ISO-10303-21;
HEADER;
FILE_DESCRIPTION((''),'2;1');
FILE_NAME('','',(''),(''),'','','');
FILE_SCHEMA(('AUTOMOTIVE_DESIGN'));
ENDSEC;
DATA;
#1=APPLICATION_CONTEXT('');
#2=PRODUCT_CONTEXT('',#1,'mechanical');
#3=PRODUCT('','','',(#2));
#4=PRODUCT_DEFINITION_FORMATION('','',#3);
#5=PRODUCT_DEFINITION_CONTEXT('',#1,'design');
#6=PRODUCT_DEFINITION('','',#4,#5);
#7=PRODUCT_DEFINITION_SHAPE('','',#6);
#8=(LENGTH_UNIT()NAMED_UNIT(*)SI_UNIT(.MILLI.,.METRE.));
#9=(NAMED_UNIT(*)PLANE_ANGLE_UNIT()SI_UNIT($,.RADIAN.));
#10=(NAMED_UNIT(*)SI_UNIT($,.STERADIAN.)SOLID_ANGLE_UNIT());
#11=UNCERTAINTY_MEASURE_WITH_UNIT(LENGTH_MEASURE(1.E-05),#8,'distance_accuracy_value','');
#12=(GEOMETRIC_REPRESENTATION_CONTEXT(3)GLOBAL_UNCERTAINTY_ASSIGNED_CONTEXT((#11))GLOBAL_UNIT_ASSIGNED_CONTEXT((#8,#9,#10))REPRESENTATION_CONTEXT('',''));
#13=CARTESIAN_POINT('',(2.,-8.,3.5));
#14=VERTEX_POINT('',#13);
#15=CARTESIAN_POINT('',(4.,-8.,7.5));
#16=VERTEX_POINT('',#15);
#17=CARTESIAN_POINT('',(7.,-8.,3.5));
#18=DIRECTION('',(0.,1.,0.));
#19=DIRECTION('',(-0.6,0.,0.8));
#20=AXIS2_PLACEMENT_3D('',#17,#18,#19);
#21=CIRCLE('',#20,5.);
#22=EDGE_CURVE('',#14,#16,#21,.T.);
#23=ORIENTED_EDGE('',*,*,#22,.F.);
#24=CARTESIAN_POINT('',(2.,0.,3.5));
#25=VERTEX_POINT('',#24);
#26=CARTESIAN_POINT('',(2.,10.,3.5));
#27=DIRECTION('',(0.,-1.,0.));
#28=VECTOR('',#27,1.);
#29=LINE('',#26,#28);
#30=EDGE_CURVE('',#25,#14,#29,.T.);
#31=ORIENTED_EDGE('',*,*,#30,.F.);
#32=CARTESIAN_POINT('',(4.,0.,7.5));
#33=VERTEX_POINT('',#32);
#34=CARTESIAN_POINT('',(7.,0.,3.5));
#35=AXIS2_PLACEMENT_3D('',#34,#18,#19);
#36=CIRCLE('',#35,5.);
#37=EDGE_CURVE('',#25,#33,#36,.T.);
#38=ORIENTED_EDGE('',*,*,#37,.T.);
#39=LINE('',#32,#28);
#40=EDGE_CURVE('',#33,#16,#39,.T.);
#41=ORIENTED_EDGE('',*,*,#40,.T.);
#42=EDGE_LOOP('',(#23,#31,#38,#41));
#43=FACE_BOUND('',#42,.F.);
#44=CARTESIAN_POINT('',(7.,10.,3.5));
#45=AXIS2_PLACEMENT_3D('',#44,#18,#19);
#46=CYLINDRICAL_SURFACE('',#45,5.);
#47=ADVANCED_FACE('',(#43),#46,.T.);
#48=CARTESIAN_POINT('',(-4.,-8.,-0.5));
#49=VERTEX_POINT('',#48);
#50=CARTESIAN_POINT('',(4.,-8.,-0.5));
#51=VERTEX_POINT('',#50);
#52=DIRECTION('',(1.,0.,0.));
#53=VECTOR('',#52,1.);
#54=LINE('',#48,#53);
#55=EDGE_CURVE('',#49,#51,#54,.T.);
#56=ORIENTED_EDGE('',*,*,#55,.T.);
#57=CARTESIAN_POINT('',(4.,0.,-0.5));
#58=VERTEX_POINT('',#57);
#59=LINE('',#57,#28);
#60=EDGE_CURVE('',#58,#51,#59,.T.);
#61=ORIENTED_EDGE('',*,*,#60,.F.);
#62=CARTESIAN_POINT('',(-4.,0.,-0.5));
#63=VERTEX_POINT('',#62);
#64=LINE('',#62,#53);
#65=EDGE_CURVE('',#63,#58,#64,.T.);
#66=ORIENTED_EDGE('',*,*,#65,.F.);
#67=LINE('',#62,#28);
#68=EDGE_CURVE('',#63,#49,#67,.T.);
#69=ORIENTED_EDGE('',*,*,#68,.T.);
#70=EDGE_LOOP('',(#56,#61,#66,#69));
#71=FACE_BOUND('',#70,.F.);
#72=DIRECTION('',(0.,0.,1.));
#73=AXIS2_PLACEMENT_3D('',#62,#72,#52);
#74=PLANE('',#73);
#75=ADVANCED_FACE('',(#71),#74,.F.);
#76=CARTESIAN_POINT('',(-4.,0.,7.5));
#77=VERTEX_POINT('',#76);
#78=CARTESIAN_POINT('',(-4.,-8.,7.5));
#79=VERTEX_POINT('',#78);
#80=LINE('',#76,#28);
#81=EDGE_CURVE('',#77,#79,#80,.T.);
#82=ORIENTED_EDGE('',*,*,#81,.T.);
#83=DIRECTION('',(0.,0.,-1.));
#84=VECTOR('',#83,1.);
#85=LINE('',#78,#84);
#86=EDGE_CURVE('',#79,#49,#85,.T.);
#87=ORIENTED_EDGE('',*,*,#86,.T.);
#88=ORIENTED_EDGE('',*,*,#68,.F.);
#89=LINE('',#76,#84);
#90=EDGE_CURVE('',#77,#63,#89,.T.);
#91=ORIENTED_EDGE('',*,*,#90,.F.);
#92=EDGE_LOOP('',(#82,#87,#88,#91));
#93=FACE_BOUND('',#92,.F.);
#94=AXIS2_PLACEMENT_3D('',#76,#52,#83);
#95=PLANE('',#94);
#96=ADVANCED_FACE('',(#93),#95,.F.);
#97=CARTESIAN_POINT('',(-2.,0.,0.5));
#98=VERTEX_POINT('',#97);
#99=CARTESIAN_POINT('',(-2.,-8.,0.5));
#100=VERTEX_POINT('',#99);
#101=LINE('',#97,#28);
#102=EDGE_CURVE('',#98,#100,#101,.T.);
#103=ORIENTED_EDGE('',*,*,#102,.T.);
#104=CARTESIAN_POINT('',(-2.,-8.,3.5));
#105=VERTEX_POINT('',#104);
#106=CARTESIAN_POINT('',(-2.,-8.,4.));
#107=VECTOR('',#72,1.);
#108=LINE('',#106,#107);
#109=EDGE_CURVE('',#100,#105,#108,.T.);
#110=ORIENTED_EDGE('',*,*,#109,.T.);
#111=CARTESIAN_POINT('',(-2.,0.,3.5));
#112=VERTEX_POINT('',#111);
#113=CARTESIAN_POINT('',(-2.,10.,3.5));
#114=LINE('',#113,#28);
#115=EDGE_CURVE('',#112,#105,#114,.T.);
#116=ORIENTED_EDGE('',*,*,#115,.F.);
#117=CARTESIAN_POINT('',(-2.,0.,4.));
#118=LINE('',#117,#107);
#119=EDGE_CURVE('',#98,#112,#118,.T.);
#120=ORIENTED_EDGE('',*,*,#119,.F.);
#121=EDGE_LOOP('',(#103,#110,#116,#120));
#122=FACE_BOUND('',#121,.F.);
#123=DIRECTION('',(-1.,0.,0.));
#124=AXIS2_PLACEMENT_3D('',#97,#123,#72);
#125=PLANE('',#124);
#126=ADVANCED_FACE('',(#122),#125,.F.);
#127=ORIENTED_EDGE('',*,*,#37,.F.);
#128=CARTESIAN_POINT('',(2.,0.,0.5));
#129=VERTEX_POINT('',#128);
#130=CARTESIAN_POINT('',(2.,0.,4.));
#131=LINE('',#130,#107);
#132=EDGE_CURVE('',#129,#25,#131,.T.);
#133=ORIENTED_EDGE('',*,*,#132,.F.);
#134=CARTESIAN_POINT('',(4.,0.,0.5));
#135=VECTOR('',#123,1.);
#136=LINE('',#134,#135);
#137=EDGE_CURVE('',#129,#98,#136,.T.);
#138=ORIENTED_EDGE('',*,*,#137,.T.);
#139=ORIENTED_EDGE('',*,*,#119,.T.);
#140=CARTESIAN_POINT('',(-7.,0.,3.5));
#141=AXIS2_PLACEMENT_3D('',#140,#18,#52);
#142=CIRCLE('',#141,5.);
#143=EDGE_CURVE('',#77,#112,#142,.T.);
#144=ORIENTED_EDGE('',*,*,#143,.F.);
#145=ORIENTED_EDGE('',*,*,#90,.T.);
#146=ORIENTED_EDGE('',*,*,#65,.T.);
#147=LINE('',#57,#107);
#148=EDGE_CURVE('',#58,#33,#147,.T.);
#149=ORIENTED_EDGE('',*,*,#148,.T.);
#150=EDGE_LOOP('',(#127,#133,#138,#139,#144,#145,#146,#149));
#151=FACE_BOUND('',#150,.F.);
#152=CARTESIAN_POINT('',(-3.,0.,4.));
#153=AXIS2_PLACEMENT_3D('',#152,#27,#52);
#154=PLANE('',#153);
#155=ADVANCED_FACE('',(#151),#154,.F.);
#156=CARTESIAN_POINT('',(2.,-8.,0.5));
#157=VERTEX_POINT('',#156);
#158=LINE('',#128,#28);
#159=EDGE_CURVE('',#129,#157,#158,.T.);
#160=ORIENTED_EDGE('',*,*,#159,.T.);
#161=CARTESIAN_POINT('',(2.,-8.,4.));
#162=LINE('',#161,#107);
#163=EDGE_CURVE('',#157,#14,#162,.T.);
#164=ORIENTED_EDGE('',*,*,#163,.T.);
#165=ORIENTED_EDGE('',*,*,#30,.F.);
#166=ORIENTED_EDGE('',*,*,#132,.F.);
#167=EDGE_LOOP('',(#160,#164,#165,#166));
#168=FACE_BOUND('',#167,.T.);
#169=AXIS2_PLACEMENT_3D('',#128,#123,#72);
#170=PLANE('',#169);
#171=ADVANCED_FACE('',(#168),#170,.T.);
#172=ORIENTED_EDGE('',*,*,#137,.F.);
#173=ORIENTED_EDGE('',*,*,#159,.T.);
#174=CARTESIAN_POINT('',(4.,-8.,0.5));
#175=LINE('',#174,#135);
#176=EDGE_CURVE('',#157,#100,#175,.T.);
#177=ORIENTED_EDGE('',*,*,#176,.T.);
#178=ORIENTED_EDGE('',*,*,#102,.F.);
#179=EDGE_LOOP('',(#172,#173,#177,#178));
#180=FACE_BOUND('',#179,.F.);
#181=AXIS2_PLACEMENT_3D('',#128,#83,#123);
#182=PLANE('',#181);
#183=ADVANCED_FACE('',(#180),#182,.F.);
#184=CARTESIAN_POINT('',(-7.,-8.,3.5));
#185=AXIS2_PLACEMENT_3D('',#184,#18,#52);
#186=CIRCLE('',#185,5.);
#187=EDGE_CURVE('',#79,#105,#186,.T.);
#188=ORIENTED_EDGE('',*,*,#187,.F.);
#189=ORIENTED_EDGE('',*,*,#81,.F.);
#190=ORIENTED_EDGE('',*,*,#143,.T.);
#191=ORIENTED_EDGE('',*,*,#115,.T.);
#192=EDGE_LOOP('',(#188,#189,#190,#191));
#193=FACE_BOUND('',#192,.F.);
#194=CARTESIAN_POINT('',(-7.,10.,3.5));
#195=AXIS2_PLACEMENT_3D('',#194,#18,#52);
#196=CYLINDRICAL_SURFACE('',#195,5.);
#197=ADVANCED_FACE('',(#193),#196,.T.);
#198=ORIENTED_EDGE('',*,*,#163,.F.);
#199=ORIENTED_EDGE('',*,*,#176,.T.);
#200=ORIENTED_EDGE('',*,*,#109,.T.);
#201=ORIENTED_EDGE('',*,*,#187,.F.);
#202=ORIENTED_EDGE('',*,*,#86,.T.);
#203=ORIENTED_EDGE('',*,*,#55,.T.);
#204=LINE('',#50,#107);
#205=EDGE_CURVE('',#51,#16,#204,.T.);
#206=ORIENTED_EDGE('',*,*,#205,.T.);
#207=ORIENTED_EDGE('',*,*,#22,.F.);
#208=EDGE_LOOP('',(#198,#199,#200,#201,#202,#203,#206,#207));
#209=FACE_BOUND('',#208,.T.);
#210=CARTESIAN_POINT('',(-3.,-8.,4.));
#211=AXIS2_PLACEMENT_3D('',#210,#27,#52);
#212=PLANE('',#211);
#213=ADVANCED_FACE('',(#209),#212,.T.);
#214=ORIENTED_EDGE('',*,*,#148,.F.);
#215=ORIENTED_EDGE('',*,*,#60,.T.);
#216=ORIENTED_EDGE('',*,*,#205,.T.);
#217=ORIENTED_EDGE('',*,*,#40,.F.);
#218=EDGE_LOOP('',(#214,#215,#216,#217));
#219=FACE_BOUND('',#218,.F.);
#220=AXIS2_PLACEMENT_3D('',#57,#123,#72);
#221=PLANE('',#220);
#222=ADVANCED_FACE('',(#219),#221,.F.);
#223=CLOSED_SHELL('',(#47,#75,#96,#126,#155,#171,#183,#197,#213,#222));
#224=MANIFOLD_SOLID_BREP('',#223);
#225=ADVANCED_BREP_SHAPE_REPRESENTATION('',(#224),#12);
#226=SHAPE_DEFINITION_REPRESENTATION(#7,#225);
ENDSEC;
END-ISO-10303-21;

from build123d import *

# Parameters (mm, degrees)
F0_W        = 2
F0_H        = 7
F1_DEPTH    = 8
F2_T1_DEPTH = 28


# Not quite as in the source:
# - a fillet or chamfer that OpenCascade refuses, or shapes differently, is made with other operations: its cross-section is extruded or revolved along the edge and cut away or added


with BuildPart() as f1:
    # F0 (on Front) → F1 (new body)
    with BuildSketch(Plane.XZ):
        with Locations((-3, 4)):
            Rectangle(F0_W, F0_H)
        Polygon((-2, 0.5), (-4, 0.5), (-4, -0.5), (4, -0.5), (4, 0.5), (2, 0.5), align=None)
        with Locations((3, 4)):
            Rectangle(F0_W, F0_H)
    extrude(amount=F1_DEPTH)

    # F2: fillet of radius 5 on 2 edges, made by hand

    # F2_s2 → F2_t1 (cut)
    with BuildSketch(Plane.XZ.offset(-10)):
        with BuildLine():
            ThreePointArc((-2, 3.5), (-2.527864045, 5.7360679775), (-4, 7.5))
            Line((-4, 7.5), (-2, 7.5))
            Line((-2, 7.5), (-2, 3.5))
        make_face()
        with BuildLine():
            ThreePointArc((4, 7.5), (2.527864045, 5.7360679775), (2, 3.5))
            Line((2, 3.5), (2, 7.5))
            Line((2, 7.5), (4, 7.5))
        make_face()
    extrude(amount=F2_T1_DEPTH, mode=Mode.SUBTRACT)


solid = f1.part
